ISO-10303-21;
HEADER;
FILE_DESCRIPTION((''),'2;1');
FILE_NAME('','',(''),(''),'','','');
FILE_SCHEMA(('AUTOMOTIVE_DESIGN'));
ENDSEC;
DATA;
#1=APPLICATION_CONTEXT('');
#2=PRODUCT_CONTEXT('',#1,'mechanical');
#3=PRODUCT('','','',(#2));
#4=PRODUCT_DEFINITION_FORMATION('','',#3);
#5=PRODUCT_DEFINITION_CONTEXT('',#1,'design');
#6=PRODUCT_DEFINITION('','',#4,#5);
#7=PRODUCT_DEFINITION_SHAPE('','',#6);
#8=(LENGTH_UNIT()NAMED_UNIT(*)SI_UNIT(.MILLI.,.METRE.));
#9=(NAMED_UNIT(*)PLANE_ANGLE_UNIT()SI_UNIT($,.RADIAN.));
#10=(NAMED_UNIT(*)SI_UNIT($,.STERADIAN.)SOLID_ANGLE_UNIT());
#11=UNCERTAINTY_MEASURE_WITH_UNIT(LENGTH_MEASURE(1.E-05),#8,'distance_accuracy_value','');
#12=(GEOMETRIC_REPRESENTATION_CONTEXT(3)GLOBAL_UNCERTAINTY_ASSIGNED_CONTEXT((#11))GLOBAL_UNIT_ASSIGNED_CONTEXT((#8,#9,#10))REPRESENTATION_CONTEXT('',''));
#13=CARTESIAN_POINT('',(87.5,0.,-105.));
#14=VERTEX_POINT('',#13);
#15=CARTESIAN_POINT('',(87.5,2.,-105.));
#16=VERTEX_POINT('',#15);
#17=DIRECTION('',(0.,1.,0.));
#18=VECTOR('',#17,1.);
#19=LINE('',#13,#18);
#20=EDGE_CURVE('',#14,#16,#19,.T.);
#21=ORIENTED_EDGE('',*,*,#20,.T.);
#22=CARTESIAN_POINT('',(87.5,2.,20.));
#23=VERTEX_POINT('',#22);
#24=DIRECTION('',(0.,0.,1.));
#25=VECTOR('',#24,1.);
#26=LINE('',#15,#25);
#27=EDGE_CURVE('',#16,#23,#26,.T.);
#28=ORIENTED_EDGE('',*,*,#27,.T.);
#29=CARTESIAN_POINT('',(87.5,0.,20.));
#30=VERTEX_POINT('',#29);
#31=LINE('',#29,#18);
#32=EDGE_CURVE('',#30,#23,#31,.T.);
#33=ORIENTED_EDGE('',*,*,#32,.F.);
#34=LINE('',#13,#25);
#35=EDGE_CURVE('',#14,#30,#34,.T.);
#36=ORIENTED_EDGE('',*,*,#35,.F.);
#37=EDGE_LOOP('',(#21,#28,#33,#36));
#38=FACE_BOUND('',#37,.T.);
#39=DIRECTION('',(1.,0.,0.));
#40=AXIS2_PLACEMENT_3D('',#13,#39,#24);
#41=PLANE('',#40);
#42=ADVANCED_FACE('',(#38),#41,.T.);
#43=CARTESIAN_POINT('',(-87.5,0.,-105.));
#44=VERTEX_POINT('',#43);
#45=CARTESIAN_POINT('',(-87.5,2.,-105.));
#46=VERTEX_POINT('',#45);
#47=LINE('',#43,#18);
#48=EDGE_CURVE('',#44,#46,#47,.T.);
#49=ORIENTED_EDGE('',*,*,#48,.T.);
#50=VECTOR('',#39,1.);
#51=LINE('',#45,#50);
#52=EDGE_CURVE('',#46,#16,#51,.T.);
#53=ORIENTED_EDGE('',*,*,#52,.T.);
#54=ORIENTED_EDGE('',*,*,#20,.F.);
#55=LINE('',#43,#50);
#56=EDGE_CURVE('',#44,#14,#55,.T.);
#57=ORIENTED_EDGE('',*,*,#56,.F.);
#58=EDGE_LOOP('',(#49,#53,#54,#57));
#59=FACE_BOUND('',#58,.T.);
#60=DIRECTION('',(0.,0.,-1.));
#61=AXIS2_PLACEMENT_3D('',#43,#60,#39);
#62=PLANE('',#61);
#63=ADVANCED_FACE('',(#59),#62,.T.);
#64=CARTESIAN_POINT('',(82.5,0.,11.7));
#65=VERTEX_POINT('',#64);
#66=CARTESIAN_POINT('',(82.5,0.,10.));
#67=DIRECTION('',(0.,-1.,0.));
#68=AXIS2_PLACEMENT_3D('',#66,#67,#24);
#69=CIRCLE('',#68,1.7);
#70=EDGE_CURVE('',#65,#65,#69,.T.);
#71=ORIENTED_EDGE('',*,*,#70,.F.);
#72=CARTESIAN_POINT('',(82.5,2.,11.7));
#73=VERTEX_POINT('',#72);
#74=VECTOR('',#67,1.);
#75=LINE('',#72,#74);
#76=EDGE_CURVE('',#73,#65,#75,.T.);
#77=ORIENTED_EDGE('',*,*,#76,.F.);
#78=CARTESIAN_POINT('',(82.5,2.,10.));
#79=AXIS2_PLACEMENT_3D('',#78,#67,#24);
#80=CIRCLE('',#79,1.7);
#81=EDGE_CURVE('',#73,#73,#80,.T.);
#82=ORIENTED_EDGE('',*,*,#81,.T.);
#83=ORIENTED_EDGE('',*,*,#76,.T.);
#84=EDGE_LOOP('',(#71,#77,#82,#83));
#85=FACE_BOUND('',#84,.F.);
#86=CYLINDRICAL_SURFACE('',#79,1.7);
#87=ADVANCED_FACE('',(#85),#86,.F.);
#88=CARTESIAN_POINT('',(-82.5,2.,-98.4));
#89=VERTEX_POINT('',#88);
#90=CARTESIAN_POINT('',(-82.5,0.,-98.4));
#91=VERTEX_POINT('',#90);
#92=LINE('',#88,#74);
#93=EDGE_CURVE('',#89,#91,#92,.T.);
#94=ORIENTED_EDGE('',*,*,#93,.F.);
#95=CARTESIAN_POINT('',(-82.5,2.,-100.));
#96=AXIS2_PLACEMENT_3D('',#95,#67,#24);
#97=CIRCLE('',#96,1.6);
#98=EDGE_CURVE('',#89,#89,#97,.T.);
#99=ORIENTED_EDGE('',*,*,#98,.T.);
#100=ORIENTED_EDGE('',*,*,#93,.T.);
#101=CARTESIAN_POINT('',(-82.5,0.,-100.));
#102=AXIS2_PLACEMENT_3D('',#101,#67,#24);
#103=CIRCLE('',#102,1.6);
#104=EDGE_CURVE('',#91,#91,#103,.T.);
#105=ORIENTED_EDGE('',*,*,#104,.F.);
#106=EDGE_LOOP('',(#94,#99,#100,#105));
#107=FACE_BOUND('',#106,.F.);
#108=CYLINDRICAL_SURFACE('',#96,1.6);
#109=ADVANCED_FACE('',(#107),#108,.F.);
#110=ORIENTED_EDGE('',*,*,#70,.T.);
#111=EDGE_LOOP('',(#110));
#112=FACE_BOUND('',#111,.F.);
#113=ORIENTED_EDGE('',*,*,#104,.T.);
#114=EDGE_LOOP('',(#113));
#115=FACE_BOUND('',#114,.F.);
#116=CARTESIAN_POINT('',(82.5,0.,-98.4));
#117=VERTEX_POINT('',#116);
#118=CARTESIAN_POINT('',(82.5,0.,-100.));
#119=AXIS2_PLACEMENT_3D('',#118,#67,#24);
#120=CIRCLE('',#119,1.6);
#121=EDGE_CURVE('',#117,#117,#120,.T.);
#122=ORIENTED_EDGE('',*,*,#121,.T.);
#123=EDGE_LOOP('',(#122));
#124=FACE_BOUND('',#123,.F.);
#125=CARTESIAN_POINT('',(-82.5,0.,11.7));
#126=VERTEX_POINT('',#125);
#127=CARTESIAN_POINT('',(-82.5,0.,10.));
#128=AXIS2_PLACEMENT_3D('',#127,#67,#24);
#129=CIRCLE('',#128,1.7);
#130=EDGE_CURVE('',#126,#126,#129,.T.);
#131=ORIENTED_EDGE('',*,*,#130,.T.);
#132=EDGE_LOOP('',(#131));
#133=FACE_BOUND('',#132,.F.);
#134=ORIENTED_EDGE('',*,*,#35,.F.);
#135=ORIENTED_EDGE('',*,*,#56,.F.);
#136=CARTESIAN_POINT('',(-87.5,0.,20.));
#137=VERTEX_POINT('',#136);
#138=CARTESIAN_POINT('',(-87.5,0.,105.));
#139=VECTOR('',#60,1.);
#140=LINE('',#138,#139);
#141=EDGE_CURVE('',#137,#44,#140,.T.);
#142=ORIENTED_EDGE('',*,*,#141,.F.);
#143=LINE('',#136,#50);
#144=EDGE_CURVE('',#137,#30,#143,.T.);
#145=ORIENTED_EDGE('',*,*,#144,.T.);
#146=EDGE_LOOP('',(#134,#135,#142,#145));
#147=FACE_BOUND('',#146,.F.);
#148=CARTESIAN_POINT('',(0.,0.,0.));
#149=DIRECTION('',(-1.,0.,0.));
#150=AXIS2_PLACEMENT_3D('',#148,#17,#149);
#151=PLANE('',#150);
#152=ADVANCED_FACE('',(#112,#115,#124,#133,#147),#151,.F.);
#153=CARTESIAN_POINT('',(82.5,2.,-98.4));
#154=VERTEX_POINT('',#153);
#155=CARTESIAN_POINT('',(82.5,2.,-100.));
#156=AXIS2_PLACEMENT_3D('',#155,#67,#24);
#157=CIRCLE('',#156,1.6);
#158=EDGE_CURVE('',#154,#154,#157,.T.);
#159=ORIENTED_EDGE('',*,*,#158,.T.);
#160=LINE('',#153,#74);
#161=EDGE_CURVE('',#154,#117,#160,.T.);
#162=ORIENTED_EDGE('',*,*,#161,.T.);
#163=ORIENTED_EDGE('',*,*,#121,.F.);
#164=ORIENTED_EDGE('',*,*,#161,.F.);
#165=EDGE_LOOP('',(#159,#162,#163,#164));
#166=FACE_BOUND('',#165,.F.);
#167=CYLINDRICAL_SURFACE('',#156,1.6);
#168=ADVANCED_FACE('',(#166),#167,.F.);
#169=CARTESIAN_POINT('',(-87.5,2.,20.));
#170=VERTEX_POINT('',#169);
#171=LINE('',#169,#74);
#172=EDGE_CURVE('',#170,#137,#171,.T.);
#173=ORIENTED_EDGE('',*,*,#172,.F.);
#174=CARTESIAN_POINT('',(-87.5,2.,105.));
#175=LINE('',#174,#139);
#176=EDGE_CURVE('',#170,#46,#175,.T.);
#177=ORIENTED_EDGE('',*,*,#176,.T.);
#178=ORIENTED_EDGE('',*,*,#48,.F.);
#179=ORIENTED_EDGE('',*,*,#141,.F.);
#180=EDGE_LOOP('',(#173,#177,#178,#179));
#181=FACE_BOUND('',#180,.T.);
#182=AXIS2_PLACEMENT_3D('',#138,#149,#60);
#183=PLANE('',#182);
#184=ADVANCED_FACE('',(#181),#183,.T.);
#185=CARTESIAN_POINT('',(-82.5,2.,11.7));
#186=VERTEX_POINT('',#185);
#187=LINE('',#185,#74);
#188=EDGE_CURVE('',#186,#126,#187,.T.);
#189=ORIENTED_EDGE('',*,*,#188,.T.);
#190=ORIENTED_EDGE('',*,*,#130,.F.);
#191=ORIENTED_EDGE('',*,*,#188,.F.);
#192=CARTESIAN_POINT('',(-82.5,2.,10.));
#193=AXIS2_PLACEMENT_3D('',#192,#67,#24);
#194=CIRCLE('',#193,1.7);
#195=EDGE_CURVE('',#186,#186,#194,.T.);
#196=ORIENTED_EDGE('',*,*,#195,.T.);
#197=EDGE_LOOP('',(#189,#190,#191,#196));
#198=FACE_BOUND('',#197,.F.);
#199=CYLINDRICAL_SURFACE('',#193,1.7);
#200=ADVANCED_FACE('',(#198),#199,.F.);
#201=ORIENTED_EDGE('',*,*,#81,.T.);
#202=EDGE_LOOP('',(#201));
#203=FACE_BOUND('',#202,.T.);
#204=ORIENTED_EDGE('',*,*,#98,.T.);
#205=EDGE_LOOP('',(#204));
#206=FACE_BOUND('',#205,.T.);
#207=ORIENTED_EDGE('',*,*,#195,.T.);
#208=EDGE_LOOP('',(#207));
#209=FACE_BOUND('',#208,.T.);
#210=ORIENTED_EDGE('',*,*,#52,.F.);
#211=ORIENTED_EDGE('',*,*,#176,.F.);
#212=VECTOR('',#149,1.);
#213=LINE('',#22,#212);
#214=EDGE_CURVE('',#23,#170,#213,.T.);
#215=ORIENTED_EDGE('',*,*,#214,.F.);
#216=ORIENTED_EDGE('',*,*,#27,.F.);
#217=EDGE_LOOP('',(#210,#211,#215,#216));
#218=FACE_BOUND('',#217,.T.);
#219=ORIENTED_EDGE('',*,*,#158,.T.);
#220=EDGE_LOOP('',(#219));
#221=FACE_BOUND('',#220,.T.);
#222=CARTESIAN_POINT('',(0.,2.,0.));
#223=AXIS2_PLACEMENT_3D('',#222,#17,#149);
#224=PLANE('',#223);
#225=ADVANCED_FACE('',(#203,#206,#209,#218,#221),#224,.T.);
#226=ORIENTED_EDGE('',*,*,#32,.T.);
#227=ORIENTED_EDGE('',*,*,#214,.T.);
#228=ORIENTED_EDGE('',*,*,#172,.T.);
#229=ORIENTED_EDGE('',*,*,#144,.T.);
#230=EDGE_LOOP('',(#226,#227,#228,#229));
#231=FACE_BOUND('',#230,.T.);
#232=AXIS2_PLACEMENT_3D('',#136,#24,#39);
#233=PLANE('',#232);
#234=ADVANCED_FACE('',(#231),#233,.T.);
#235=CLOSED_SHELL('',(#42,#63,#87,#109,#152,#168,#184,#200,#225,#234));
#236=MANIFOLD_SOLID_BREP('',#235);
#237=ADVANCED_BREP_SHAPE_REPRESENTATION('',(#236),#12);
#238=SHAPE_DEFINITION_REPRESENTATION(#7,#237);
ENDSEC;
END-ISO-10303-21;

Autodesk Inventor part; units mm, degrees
ref_plane "YZ Plane" through (0, 0, 0) normal (1, 0, 0) x (0, 1, 0)
ref_plane "XZ Plane" through (0, 0, 0) normal (0, 1, 0) x (-1, 0, 0)
ref_plane "XY Plane" through (0, 0, 0) normal (0, 0, 1) x (1, 0, 0)
sketch "スケッチ1" plane through (0, 0, 0) normal (0, 1, 0) x (-1, 0, 0)
  line L0 (-87.5, 105) -> (87.5, 105)
  line L1 (87.5, 105) -> (87.5, -105)
  line L2 (87.5, -105) -> (-87.5, -105)
  line L3 (-87.5, -105) -> (-87.5, 105)
  line L4 (-87.5, 105) -> (87.5, -105) construction
  line L5 (87.5, 105) -> (-87.5, -105) construction
  point P0 (0, 0)
  dimension "d0" = 210
  dimension "d1" = 175
extrude "プレート1" add sketch "スケッチ1" along normal blind 2
sketch "スケッチ5" plane through (0, 2, 0) normal (0, 1, 0) x (1, 0, 0)
  line L0 (-24, -101) -> (34.6, -101)
  line L1 (34.6, -101) -> (34.6, -67)
  line L2 (34.6, -67) -> (-24, -67)
  line L3 (-24, -67) -> (-24, -101)
  line L4 (-24, -101) -> (34.6, -67) construction
  line L5 (34.6, -101) -> (-24, -67) construction
  line L6 (87.5, -105) -> (-87.5, -105) projected
  point P0 (0, 0)
  point P1 (0, -84)
  point P2 (5.3, -84)
  point P3 (5.3, -84)
  dimension "d31" = 58.6
  dimension "d32" = 24
  dimension "d33" = 34
  dimension "d78" = 4
hole "穴3" at (34.6, 2, 67) at (34.6, 2, 101) at (-24, 2, 67) at (-24, 2, 101) direction (0, -1, 0) diameter 4.3 end through all clearance for "Socket Head Cap Screw" size "M4" standard "Ansi Metric M Profile"
sketch "スケッチ6" plane through (0, 2, 0) normal (0, 1, 0) x (1, 0, 0)
  line L0 (-133.9967, -217.2896) -> (133.2896, 49.9967)
  line L1 (133.2896, 49.9967) -> (133.9967, 49.2896)
  line L2 (133.9967, 49.2896) -> (-133.2896, -217.9967)
  line L3 (-133.2896, -217.9967) -> (-133.9967, -217.2896)
  line L4 (-133.9967, -217.2896) -> (133.9967, 49.2896) construction
  line L5 (133.2896, 49.9967) -> (-133.2896, -217.9967) construction
  line L6 (133.9967, -217.2896) -> (-133.2896, 49.9967)
  line L7 (-133.2896, 49.9967) -> (-133.9967, 49.2896)
  line L8 (-133.9967, 49.2896) -> (133.2896, -217.9967)
  line L9 (133.2896, -217.9967) -> (133.9967, -217.2896)
  line L10 (133.9967, -217.2896) -> (-133.9967, 49.2896) construction
  line L11 (-133.2896, 49.9967) -> (133.2896, -217.9967) construction
  line L12 (-2.4749, -82.2322) -> (-1.7678, -81.5251)
  circle A0 centre (0, -84) radius 22
  line L13 (2.4749, -82.2322) -> (1.7678, -81.5251)
  circle A1 centre (0, -84) radius 3
  line L14 (-87.5, -105) -> (-87.5, 105) projected
  line L15 (87.5, 105) -> (87.5, -105) projected
  line L16 (122.5, 0) -> (-122.5, 0) projected
  point P0 (0, 0)
  point P1 (0, -84)
  point P2 (-2.1213, -81.8787)
  point P3 (2.1213, -81.8787)
  point P4 (15.9059, -68.8012)
  point P5 (-15.9059, -68.8012)
  dimension "d54" = 1
  dimension "d55" = 1
  dimension "d57" = 44
  dimension "d59" = 3
  dimension "d60" = 3
  dimension "d65" = 186
  dimension "d66" = 186
  dimension "d79" = 45
  dimension "d80" = 45
extrude "押し出し2" cut sketch "スケッチ6" against normal blind 10 contours A0 L6 L12 L8 | A0 L0 A1 L6 | L12 L6 A1 | A0 L2 L13 L0 | L0 L13 A1
sketch "スケッチ7" plane through (0, 2, 0) normal (0, 1, 0) x (1, 0, 0)
  line L0 (-82.5, -100) -> (82.5, -100)
  line L1 (82.5, -100) -> (82.5, 100)
  line L2 (82.5, 100) -> (-82.5, 100)
  line L3 (-82.5, 100) -> (-82.5, -100)
  line L4 (-82.5, -100) -> (82.5, 100) construction
  line L5 (82.5, -100) -> (-82.5, 100) construction
  line L6 (-87.5, -105) -> (-87.5, 105) projected
  line L7 (87.5, -105) -> (-87.5, -105) projected
  point P0 (0, 0)
  point P1 (-82.5, -45)
  point P2 (-82.5, -10)
  point P3 (82.5, -45)
  point P4 (82.5, -10)
  dimension "d45" = 5
  dimension "d46" = 5
  dimension "d67" = 55
  dimension "d68" = 35
  dimension "d69" = 55
  dimension "d70" = 35
hole "穴4" at (-82.5, 2, -100) at (82.5, 2, -100) at (-82.5, 2, 100) at (82.5, 2, 100) direction (0, -1, 0) diameter 3.2 end through all clearance for "Socket Head Cap Screw" size "M3" standard "Ansi Metric M Profile"
sketch "スケッチ8" plane through (0, 2, 0) normal (0, 1, 0) x (1, 0, 0)
  line L0 (15.9059, -68.8012) -> (2.4749, -82.2322) projected
  line L1 (-2.1213, -81.8787) -> (-2.4749, -82.2322) projected
  arc A0 (2.1213, -81.8787) -> (-2.1213, -81.8787) centre (0, -84) ccw projected
  line L2 (2.4749, -82.2322) -> (2.1213, -81.8787) projected
  line L3 (-2.4749, -82.2322) -> (-15.9059, -68.8012) projected
  arc A1 (15.9059, -68.8012) -> (-15.9059, -68.8012) centre (0, -84) ccw projected
  line L4 (2.4749, -83.6464) -> (17.2895, -68.8318)
  arc A2 (17.2895, -68.8318) -> (-17.2895, -68.8318) centre (0, -84) ccw
  line L5 (-17.2895, -68.8318) -> (-2.4749, -83.6464)
  line L6 (-2.4749, -83.6464) -> (-1.4142, -82.5858)
  arc A3 (1.4142, -82.5858) -> (-1.4142, -82.5858) centre (0, -84) ccw
  line L7 (1.4142, -82.5858) -> (2.4749, -83.6464)
  point P0 (0, 0)
  dimension "d61" = 1
extrude "押し出し3" cut sketch "スケッチ8" against normal blind 10 contours L0 L2 A0 L1 L3 A1 | L7 A3 L6 L5 A2 L4
fillet "コーナーR1" radius 1 4 edges at (-2.4749, 1, 83.6464) (2.4749, 1, 83.6464) (-17.2895, 1, 68.8318) (17.2895, 1, 68.8318)
hole "穴5" at (-82.5, 2, 45) at (-82.5, 2, 10) at (82.5, 2, 45) at (82.5, 2, 10) direction (0, -1, 0) diameter 3.4 end through all clearance for "Flat Head Machine Screw" size "M3" standard "Ansi Metric M Profile"
ref_plane "作業平面1" through (-87.5, 0, 20) normal (0, 0, 1) x (1, 0, 0)
sketch "スケッチ9" plane through (-87.5, 0, 20) normal (0, 0, 1) x (1, 0, 0)
  line L0 (175, 0) -> (175, 2) projected
  line L1 (0, 0) -> (175, 0)
  line L2 (175, 0) -> (175, 2)
  line L3 (175, 2) -> (0, 2)
  line L4 (0, 2) -> (0, 0)
  point P0 (87.5, 0)
extrude "押し出し4" cut sketch "スケッチ9" along normal blind 159
equation "\"d40\" = Thickness"
equation "\"d60\" = d59"
equation "\"d66\" = d65"
equation "\"d69\" = d67"
equation "\"d70\" = d68"
equation "\"d76\" = Thickness"
equation "\"d2\" = Thickness"
equation "\"BendRadius\" = Thickness"
equation "\"BendReliefWidth\" = Thickness"
equation "\"BendReliefDepth\" = 0.5 * Thickness"
equation "\"CornerReliefSize\" = 4 * Thickness"
equation "\"MinimumRemnant\" = 2 * Thickness"
equation "\"TransitionRadius\" = BendRadius"
equation "\"JacobiRadiusSize\" = BendRadius"
equation "\"GapSize\" = Thickness"
equation "\"Thickness\" = 2"
properties part number "s_carbon_plate1" material "CFRP"
